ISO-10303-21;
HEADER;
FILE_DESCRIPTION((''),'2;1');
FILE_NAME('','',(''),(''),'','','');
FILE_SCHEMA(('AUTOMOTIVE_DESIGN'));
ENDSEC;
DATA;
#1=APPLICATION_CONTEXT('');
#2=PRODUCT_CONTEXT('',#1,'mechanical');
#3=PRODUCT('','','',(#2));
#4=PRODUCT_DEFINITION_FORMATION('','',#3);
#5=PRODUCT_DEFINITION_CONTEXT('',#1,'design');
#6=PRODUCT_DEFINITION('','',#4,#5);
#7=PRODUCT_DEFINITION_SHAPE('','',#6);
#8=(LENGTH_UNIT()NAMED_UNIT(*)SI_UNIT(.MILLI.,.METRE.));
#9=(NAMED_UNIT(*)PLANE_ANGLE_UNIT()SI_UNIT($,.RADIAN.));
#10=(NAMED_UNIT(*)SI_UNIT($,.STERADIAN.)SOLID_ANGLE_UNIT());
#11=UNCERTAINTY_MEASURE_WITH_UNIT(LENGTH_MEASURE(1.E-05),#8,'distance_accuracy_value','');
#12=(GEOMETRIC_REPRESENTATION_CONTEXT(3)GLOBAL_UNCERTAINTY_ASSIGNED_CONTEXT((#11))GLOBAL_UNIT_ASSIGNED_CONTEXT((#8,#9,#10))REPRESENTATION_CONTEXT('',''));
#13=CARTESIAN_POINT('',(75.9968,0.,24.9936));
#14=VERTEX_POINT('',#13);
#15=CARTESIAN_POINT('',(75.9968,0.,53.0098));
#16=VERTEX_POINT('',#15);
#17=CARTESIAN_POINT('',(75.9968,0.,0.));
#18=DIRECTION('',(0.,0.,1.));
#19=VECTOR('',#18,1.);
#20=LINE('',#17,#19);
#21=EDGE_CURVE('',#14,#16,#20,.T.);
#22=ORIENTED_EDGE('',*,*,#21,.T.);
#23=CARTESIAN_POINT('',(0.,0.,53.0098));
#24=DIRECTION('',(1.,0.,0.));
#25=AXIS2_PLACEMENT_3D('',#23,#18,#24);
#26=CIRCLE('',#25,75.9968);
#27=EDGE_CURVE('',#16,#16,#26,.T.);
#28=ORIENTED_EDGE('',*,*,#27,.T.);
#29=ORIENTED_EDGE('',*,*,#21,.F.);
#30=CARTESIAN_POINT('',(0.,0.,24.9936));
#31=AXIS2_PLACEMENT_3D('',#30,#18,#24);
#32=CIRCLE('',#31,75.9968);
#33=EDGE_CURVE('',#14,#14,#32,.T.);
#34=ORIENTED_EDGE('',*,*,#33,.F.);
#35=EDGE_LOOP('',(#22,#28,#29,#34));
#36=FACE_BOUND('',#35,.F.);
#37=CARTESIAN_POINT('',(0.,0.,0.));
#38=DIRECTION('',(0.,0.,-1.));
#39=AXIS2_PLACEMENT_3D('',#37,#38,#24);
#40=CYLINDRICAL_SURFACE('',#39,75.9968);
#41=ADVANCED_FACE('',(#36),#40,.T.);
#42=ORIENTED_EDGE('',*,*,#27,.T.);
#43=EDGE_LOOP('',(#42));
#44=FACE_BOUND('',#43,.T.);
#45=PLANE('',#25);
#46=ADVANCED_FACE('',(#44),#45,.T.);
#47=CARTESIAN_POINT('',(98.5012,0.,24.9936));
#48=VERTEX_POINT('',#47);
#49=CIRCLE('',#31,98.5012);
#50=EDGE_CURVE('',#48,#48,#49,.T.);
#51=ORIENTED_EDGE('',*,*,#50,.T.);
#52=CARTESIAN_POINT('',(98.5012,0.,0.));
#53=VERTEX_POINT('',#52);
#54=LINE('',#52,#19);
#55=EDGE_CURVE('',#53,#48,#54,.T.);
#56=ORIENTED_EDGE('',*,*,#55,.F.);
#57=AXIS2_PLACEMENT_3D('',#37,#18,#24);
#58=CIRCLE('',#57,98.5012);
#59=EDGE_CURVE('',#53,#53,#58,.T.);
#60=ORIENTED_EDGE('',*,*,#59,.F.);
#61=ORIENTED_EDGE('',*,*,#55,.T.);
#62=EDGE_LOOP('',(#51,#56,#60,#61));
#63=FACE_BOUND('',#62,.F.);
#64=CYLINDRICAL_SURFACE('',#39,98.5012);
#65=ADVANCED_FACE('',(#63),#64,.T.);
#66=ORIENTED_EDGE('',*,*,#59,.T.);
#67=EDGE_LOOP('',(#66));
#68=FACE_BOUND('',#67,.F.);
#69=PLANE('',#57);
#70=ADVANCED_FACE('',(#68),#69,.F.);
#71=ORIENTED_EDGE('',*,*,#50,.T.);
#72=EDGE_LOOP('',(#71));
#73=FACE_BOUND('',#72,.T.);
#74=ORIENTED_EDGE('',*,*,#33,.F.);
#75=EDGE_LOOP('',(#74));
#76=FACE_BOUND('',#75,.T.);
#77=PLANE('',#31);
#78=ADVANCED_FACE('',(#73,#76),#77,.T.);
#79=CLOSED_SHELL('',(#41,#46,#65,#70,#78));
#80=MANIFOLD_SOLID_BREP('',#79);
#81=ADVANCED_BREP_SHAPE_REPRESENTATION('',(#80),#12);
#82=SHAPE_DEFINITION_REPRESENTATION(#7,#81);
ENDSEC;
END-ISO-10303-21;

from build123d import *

# Parameters (mm, degrees)
F0_R     = 98.5012
F0_R_2   = 75.9968
F1_DEPTH = 24.9936
F2_DEPTH = 53.0098


# Not quite as in the source:
# - a feature names something its author has since deleted; it is built from what else it names
# - the program builds the solid bodies; features that only make, move or delete a surface that nothing else refers to are left out


with BuildPart() as f1:
    # F0 (on Top) → F1 (new body)
    with BuildSketch(Plane.XY):
        Circle(F0_R)
        Circle(F0_R_2, mode=Mode.SUBTRACT)
    extrude(amount=F1_DEPTH)

    # F0 (on Top) → F2 (join)
    with BuildSketch(Plane.XY):
        Circle(F0_R_2)
    extrude(amount=F2_DEPTH)


solid = f1.part
